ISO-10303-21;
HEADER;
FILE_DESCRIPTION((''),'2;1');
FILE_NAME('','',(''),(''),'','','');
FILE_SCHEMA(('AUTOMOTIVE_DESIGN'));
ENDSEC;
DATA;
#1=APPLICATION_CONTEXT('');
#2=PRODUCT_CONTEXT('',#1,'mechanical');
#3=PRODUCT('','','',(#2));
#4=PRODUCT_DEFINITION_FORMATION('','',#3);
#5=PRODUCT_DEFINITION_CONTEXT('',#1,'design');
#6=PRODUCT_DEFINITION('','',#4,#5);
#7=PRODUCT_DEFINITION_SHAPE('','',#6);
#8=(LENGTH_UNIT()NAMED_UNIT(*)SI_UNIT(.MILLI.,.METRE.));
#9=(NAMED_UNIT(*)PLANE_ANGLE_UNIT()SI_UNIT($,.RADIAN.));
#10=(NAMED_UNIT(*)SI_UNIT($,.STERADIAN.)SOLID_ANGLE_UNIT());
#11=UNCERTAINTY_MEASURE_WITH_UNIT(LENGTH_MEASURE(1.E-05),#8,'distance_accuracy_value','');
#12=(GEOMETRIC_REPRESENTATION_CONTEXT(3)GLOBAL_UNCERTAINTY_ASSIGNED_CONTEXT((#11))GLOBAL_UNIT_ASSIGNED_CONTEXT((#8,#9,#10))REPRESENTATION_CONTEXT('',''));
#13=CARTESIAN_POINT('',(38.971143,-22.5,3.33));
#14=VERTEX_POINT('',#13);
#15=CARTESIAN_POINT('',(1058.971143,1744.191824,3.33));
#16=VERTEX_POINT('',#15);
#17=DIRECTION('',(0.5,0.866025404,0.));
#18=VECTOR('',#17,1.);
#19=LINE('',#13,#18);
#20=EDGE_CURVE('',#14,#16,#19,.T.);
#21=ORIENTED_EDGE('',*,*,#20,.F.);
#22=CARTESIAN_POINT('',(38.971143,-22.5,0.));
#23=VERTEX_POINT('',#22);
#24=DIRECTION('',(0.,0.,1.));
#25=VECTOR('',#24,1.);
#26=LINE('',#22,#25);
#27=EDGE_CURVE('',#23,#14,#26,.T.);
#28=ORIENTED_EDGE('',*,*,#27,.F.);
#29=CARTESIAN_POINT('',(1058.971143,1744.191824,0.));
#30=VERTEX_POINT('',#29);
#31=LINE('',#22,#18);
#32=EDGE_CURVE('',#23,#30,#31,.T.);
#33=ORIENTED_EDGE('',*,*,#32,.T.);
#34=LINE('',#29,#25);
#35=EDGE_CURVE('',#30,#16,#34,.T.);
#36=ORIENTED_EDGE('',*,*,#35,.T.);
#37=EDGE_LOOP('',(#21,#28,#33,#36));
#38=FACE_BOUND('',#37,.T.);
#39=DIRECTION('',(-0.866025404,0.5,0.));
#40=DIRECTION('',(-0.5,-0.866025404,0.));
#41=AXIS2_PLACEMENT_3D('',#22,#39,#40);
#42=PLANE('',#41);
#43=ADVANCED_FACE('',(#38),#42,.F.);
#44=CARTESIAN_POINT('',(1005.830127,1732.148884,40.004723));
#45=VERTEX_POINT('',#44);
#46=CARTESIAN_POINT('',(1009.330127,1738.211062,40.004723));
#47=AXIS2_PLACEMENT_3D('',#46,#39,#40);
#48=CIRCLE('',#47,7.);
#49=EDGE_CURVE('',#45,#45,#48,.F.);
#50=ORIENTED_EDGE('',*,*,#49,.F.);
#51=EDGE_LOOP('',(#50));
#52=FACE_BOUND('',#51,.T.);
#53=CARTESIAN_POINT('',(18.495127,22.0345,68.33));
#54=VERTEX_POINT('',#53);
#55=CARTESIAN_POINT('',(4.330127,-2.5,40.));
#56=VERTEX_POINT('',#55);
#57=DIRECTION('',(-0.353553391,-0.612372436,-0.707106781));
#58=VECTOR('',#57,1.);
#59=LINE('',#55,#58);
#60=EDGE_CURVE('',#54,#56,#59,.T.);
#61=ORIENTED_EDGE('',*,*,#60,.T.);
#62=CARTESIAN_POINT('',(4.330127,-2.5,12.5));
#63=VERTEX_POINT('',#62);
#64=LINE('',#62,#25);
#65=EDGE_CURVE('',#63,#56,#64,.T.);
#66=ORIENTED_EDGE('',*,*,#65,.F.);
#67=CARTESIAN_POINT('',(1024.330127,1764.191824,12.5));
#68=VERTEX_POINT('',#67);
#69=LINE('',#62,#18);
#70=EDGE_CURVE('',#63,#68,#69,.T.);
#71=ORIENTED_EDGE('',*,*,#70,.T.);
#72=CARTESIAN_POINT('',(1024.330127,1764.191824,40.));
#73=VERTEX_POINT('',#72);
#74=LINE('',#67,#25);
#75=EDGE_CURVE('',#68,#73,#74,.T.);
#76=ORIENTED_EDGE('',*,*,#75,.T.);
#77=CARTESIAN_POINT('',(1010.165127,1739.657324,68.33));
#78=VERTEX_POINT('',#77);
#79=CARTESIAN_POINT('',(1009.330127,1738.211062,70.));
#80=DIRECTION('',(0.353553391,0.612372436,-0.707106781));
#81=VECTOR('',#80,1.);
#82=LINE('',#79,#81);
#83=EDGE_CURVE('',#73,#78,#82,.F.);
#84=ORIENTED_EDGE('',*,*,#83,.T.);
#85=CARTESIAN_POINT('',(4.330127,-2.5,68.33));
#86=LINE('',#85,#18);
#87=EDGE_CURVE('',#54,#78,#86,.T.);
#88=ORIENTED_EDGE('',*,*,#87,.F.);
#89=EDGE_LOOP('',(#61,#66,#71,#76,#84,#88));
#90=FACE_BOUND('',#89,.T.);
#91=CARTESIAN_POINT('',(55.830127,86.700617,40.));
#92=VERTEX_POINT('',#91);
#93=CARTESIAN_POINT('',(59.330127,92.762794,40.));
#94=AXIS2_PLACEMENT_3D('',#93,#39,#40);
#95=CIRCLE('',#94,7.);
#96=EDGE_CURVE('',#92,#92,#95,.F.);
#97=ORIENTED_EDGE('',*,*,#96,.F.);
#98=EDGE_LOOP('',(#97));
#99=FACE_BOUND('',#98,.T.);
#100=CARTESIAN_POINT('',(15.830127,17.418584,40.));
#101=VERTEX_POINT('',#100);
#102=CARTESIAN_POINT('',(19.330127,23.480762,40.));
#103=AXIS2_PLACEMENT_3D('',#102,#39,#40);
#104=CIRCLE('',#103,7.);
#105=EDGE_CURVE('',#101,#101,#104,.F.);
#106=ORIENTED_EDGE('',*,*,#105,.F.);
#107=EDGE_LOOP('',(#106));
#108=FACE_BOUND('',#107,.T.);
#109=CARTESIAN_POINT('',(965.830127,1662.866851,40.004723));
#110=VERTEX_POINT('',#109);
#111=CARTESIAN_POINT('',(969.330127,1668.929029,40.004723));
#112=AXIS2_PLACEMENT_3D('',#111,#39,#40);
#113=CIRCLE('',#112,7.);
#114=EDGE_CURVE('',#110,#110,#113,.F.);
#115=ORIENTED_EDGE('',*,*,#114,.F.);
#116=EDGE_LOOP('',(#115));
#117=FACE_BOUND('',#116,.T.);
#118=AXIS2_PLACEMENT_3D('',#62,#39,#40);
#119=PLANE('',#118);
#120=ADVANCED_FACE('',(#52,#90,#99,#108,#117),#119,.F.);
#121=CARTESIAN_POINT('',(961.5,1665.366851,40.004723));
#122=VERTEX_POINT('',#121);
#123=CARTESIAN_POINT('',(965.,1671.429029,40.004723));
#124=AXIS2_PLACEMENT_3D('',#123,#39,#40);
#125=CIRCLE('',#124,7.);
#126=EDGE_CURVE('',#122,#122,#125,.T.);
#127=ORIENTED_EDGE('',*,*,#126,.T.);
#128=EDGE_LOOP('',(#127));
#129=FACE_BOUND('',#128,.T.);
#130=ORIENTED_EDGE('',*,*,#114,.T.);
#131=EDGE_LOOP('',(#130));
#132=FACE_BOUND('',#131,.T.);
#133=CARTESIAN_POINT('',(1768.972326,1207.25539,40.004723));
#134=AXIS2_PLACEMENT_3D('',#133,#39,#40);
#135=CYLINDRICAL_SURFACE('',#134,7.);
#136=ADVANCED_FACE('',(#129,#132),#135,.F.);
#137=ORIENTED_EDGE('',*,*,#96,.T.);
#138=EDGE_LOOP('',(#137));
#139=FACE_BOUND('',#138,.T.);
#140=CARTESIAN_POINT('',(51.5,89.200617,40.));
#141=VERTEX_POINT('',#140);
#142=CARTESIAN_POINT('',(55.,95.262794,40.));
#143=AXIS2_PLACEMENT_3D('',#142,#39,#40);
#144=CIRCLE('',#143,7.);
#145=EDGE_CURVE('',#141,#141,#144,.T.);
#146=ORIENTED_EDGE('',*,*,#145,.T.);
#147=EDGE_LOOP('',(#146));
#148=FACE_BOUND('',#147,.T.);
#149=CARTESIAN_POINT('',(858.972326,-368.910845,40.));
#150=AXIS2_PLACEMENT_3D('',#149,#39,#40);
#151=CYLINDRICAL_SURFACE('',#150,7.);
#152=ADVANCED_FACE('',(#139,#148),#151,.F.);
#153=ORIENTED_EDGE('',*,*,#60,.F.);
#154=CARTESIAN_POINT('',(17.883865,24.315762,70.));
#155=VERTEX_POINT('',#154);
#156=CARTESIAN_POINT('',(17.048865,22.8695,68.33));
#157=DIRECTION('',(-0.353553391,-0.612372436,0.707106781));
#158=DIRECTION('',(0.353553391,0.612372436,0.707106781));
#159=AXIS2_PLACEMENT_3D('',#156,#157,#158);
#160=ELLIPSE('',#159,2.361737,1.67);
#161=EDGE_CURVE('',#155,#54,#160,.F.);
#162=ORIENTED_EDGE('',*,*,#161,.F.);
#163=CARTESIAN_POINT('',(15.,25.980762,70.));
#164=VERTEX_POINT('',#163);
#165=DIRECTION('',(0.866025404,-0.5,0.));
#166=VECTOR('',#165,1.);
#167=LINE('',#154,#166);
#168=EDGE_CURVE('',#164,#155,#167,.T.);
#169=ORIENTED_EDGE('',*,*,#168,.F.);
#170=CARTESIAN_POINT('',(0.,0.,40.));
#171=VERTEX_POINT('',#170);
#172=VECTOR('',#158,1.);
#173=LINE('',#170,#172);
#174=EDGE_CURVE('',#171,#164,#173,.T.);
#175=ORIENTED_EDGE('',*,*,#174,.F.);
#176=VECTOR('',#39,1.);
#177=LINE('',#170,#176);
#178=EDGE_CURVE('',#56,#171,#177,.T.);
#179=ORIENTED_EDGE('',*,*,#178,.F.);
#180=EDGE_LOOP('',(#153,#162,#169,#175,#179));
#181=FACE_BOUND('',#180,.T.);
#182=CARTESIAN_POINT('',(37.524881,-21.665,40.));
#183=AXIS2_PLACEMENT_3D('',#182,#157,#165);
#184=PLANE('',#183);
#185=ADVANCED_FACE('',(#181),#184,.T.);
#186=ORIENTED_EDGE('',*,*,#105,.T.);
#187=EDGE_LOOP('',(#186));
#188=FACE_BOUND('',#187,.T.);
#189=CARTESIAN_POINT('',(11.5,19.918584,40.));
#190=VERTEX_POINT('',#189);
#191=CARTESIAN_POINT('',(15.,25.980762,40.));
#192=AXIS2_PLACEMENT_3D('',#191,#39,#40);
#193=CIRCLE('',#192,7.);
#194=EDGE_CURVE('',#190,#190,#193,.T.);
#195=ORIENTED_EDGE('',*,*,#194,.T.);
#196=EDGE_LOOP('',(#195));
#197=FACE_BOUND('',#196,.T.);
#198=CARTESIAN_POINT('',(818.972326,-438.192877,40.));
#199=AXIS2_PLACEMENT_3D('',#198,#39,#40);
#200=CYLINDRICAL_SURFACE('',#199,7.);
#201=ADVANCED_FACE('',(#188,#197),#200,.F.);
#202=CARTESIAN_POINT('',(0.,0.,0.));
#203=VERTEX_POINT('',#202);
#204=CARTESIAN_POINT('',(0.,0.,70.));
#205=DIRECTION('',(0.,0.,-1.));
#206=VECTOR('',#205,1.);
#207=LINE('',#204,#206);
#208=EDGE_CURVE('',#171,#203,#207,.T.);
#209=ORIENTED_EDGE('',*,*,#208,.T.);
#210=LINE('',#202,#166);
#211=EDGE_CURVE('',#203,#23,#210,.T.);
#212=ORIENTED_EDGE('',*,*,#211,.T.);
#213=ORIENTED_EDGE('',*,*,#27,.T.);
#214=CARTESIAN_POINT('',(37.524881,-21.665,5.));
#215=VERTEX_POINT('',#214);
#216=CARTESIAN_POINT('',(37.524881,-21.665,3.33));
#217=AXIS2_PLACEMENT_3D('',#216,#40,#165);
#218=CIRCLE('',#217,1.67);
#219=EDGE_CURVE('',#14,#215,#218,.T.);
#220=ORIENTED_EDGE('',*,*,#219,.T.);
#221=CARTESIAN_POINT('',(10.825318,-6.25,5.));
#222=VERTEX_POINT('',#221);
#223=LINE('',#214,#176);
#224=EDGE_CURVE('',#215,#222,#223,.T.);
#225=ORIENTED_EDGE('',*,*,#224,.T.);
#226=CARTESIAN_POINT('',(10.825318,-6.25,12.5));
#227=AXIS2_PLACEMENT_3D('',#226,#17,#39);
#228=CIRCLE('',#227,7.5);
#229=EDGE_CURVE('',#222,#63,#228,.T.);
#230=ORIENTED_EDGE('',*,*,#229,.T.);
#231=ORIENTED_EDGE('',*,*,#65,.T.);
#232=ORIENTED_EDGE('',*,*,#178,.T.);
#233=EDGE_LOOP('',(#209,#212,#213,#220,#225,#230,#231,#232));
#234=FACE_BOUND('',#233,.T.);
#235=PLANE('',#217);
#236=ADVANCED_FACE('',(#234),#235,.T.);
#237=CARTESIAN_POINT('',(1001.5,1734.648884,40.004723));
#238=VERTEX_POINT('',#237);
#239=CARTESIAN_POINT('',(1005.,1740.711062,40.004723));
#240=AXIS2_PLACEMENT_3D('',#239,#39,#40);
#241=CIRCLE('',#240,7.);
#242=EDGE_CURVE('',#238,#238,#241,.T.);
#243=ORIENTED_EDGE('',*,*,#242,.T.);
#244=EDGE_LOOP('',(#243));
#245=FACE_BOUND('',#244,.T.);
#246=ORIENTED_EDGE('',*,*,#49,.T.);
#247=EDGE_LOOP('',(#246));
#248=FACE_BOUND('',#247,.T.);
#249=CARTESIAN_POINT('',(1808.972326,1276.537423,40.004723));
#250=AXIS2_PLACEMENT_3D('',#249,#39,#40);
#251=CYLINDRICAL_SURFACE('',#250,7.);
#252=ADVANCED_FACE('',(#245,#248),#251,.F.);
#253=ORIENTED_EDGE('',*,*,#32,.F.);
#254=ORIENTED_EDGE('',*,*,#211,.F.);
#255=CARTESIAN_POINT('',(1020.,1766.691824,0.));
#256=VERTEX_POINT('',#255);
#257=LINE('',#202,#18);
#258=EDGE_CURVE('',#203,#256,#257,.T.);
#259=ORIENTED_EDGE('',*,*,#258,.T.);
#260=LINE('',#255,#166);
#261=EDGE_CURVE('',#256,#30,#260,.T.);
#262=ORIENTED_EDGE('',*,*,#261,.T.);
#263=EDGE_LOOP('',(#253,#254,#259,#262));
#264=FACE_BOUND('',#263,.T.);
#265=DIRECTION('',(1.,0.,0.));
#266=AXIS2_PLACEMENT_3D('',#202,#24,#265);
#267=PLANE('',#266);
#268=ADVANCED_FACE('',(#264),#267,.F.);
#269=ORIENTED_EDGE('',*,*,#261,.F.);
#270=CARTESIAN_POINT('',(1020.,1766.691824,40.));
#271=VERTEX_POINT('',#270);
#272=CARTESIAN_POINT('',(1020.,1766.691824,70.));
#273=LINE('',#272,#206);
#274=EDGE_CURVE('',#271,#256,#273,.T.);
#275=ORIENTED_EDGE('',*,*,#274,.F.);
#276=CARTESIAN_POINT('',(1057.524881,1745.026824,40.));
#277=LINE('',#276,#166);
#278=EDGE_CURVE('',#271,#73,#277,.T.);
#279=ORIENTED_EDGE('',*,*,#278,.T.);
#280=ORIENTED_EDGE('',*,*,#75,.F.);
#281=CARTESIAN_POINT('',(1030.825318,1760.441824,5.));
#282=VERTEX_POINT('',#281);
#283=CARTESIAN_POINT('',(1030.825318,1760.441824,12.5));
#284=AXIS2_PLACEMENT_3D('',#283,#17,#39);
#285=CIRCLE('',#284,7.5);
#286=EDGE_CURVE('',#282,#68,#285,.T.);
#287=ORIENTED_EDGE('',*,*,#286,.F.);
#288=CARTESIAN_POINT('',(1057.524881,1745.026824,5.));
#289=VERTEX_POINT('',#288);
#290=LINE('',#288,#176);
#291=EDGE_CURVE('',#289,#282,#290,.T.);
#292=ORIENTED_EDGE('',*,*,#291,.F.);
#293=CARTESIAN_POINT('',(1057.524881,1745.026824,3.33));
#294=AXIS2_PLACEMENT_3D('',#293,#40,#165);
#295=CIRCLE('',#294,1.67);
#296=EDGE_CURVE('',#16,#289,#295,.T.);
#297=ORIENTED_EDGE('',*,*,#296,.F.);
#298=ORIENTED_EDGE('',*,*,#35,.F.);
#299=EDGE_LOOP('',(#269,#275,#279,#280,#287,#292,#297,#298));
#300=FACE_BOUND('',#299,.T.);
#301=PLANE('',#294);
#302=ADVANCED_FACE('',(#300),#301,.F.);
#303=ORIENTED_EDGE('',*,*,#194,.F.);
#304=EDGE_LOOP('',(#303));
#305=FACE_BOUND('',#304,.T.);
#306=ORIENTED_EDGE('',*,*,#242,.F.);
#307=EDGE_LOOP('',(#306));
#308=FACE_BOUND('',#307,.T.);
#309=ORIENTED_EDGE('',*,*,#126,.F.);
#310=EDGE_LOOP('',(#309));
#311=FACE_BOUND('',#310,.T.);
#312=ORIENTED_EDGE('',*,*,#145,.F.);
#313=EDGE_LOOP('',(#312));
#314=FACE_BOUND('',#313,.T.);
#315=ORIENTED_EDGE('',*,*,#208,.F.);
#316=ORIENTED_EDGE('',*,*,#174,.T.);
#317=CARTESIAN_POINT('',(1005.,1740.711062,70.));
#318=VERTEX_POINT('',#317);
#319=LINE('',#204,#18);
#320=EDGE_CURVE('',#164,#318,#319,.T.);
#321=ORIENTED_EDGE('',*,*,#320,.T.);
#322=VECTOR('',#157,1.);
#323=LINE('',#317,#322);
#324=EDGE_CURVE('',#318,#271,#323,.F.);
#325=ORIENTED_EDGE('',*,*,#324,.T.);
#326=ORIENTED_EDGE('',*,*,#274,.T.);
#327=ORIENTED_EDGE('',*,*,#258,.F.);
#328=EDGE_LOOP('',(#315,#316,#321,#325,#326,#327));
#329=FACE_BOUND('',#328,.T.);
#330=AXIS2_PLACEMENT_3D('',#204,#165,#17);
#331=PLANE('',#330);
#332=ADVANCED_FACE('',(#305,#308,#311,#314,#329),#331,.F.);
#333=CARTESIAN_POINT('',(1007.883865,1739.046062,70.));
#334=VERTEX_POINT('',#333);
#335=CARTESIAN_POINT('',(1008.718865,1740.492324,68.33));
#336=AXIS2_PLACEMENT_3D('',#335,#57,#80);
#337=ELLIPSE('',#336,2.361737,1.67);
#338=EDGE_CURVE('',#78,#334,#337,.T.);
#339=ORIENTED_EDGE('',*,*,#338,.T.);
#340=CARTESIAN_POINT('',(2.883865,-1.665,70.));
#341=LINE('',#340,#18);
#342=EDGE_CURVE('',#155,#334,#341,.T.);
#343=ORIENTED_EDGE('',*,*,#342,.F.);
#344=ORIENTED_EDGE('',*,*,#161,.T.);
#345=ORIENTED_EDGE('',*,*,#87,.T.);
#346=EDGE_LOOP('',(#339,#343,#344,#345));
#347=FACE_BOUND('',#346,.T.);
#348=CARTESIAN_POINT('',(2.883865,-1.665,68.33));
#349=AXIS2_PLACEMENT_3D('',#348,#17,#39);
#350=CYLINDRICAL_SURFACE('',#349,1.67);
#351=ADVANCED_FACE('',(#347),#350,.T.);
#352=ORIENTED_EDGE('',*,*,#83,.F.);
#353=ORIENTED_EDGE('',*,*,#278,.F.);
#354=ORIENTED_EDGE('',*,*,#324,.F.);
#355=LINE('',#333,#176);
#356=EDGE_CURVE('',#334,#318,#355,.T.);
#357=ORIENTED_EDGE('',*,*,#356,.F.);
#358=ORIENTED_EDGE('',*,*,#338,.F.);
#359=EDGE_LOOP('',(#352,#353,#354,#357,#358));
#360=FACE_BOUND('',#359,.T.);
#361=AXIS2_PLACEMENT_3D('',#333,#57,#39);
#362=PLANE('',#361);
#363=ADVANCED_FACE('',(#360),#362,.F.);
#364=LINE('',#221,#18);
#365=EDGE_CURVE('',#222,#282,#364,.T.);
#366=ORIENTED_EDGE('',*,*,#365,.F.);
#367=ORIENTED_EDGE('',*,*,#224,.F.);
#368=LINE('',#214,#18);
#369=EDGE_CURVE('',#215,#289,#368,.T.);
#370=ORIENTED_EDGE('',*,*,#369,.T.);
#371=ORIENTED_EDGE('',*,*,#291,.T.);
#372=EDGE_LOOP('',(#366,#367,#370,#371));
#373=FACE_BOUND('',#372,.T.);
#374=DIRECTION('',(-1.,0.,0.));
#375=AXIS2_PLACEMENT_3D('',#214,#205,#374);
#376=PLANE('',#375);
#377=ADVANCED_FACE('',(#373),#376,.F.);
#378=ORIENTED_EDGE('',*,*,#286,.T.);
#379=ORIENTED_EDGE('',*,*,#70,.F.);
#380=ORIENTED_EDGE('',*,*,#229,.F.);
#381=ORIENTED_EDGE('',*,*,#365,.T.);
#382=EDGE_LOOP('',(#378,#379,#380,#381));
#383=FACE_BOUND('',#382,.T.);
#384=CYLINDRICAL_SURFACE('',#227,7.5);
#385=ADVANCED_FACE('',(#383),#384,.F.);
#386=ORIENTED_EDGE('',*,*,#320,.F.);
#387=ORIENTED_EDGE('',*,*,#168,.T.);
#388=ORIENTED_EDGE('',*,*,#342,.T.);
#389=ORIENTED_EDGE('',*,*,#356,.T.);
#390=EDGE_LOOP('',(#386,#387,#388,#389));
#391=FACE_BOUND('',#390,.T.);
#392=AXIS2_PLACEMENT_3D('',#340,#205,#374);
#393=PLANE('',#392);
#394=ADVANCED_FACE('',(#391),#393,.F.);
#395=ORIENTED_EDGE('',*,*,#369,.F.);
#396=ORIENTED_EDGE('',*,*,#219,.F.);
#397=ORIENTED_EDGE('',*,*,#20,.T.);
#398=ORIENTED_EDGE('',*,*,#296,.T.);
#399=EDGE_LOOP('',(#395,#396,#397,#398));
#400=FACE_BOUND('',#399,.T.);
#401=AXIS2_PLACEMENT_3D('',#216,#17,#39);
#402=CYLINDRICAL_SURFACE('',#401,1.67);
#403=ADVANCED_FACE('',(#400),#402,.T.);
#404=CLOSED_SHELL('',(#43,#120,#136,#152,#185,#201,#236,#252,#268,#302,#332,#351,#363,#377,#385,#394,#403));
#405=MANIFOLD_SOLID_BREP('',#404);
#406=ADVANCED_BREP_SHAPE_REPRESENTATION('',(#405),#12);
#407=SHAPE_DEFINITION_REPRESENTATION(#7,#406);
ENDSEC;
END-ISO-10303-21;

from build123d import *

# Parameters (mm, degrees)
F_70X45X5_1_DEPTH   = 2040
CUT_EXTRUDE_1_REACH = 2062.951
SKETCH_12_R         = 7
CUT_EXTRUDE_2_REACH = 2062.951
SKETCH_13_R         = 7
CHAMFER_1_SIZE      = 30
CHAMFER_2_SIZE      = 30


with BuildPart() as part:
    # 草图11 → 不等边角钢 70X45X5(1) (new body)
    with BuildSketch(Plane(origin=(1020, 1766.69182372, 0), x_dir=(0.86602540378444, -0.49999999999999784, 0), z_dir=(-0.49999999999999784, -0.86602540378444, 0))):
        with BuildLine():
            Line((0, 70), (0, 0))
            Line((0, 0), (45, 0))
            Line((45, 0), (45, 3.33))
            ThreePointArc((45, 3.33), (44.510868325, 4.510868325), (43.33, 5))
            Line((43.33, 5), (12.5, 5))
            ThreePointArc((12.5, 5), (7.196699141, 7.196699141), (5, 12.5))
            Line((5, 12.5), (5, 68.33))
            ThreePointArc((5, 68.33), (4.510868325, 69.510868325), (3.33, 70))
            Line((3.33, 70), (0, 70))
        make_face()
    extrude(amount=F_70X45X5_1_DEPTH)

    # 草图12 → 切除-拉伸1 (cut, up to next)
    with BuildSketch(Plane(origin=(0, 0, 0), x_dir=(0, 0, 1), z_dir=(-0.86602540378444, 0.49999999999999784, 0)), mode=Mode.PRIVATE) as cut_extrude_1_sk1:
        with Locations(Location((40, 30, 0), (0, 0, 270))):
            Circle(SKETCH_12_R)
    cut_extrude_1_tool1 = extrude(cut_extrude_1_sk1.sketch, amount=-CUT_EXTRUDE_1_REACH, mode=Mode.PRIVATE) & part.part
    # 草图12 → 切除-拉伸1 (cut, up to next)
    with BuildSketch(Plane(origin=(0, 0, 0), x_dir=(0, 0, 1), z_dir=(-0.86602540378444, 0.49999999999999784, 0)), mode=Mode.PRIVATE) as cut_extrude_1_sk2:
        with Locations(Location((40, 110, 0), (0, 0, 270))):
            Circle(SKETCH_12_R)
    cut_extrude_1_tool2 = extrude(cut_extrude_1_sk2.sketch, amount=-CUT_EXTRUDE_1_REACH, mode=Mode.PRIVATE) & part.part
    add(cut_extrude_1_tool1.solids().sort_by_distance((15, 25.980762, 40))[0], mode=Mode.SUBTRACT)
    add(cut_extrude_1_tool2.solids().sort_by_distance((55, 95.262794, 40))[0], mode=Mode.SUBTRACT)

    # 草图13 → 切除-拉伸2 (cut, up to next)
    with BuildSketch(Plane(origin=(0, 0, 0), x_dir=(0, 0, 1), z_dir=(-0.86602540378444, 0.49999999999999784, 0)), mode=Mode.PRIVATE) as cut_extrude_2_sk1:
        with Locations(Location((40.004723234, 1930, 0), (0, 0, 270))):
            Circle(SKETCH_13_R)
    cut_extrude_2_tool1 = extrude(cut_extrude_2_sk1.sketch, amount=-CUT_EXTRUDE_2_REACH, mode=Mode.PRIVATE) & part.part
    # 草图13 → 切除-拉伸2 (cut, up to next)
    with BuildSketch(Plane(origin=(0, 0, 0), x_dir=(0, 0, 1), z_dir=(-0.86602540378444, 0.49999999999999784, 0)), mode=Mode.PRIVATE) as cut_extrude_2_sk2:
        with Locations(Location((40.004723234, 2010, 0), (0, 0, 270))):
            Circle(SKETCH_13_R)
    cut_extrude_2_tool2 = extrude(cut_extrude_2_sk2.sketch, amount=-CUT_EXTRUDE_2_REACH, mode=Mode.PRIVATE) & part.part
    add(cut_extrude_2_tool1.solids().sort_by_distance((965, 1671.429029, 40.004723))[0], mode=Mode.SUBTRACT)
    add(cut_extrude_2_tool2.solids().sort_by_distance((1005, 1740.711062, 40.004723))[0], mode=Mode.SUBTRACT)

    # 倒角1
    # the kernel refuses this chamfer: 30 mm, written as the material it takes off along each edge
    with BuildSketch(Plane(origin=(1089.698148536, 1726.451578901, 70), x_dir=(-0.49981095845564616, -0.8656979742248816, 0.027495876610586854), z_dir=(-0.86602540378444, 0.49999999999999784, 0))) as chamfer_1_piece_1:
        Polygon((CHAMFER_1_SIZE * 0.999621916911, -CHAMFER_1_SIZE * 0.0274958766106), (-CHAMFER_1_SIZE * 0.0274958766106, -CHAMFER_1_SIZE * 0.999621916911), (0, 0), align=None)
    extrude(amount=157.630979278, mode=Mode.SUBTRACT)

    # 倒角2
    # the kernel refuses this chamfer: 30 mm, written as the material it takes off along each edge
    with BuildSketch(Plane(origin=(69.698148536, -40.240244819, 70), x_dir=(-0.013747938305293054, -0.023812127644090075, -0.9996219169112966), z_dir=(-0.86602540378444, 0.49999999999999784, 0))) as chamfer_2_piece_1:
        Polygon((CHAMFER_2_SIZE * 0.999621916911, -CHAMFER_2_SIZE * 0.0274958766106), (-CHAMFER_2_SIZE * 0.0274958766106, -CHAMFER_2_SIZE * 0.999621916911), (0, 0), align=None)
    extrude(amount=157.630979278, mode=Mode.SUBTRACT)


solid = part.part
